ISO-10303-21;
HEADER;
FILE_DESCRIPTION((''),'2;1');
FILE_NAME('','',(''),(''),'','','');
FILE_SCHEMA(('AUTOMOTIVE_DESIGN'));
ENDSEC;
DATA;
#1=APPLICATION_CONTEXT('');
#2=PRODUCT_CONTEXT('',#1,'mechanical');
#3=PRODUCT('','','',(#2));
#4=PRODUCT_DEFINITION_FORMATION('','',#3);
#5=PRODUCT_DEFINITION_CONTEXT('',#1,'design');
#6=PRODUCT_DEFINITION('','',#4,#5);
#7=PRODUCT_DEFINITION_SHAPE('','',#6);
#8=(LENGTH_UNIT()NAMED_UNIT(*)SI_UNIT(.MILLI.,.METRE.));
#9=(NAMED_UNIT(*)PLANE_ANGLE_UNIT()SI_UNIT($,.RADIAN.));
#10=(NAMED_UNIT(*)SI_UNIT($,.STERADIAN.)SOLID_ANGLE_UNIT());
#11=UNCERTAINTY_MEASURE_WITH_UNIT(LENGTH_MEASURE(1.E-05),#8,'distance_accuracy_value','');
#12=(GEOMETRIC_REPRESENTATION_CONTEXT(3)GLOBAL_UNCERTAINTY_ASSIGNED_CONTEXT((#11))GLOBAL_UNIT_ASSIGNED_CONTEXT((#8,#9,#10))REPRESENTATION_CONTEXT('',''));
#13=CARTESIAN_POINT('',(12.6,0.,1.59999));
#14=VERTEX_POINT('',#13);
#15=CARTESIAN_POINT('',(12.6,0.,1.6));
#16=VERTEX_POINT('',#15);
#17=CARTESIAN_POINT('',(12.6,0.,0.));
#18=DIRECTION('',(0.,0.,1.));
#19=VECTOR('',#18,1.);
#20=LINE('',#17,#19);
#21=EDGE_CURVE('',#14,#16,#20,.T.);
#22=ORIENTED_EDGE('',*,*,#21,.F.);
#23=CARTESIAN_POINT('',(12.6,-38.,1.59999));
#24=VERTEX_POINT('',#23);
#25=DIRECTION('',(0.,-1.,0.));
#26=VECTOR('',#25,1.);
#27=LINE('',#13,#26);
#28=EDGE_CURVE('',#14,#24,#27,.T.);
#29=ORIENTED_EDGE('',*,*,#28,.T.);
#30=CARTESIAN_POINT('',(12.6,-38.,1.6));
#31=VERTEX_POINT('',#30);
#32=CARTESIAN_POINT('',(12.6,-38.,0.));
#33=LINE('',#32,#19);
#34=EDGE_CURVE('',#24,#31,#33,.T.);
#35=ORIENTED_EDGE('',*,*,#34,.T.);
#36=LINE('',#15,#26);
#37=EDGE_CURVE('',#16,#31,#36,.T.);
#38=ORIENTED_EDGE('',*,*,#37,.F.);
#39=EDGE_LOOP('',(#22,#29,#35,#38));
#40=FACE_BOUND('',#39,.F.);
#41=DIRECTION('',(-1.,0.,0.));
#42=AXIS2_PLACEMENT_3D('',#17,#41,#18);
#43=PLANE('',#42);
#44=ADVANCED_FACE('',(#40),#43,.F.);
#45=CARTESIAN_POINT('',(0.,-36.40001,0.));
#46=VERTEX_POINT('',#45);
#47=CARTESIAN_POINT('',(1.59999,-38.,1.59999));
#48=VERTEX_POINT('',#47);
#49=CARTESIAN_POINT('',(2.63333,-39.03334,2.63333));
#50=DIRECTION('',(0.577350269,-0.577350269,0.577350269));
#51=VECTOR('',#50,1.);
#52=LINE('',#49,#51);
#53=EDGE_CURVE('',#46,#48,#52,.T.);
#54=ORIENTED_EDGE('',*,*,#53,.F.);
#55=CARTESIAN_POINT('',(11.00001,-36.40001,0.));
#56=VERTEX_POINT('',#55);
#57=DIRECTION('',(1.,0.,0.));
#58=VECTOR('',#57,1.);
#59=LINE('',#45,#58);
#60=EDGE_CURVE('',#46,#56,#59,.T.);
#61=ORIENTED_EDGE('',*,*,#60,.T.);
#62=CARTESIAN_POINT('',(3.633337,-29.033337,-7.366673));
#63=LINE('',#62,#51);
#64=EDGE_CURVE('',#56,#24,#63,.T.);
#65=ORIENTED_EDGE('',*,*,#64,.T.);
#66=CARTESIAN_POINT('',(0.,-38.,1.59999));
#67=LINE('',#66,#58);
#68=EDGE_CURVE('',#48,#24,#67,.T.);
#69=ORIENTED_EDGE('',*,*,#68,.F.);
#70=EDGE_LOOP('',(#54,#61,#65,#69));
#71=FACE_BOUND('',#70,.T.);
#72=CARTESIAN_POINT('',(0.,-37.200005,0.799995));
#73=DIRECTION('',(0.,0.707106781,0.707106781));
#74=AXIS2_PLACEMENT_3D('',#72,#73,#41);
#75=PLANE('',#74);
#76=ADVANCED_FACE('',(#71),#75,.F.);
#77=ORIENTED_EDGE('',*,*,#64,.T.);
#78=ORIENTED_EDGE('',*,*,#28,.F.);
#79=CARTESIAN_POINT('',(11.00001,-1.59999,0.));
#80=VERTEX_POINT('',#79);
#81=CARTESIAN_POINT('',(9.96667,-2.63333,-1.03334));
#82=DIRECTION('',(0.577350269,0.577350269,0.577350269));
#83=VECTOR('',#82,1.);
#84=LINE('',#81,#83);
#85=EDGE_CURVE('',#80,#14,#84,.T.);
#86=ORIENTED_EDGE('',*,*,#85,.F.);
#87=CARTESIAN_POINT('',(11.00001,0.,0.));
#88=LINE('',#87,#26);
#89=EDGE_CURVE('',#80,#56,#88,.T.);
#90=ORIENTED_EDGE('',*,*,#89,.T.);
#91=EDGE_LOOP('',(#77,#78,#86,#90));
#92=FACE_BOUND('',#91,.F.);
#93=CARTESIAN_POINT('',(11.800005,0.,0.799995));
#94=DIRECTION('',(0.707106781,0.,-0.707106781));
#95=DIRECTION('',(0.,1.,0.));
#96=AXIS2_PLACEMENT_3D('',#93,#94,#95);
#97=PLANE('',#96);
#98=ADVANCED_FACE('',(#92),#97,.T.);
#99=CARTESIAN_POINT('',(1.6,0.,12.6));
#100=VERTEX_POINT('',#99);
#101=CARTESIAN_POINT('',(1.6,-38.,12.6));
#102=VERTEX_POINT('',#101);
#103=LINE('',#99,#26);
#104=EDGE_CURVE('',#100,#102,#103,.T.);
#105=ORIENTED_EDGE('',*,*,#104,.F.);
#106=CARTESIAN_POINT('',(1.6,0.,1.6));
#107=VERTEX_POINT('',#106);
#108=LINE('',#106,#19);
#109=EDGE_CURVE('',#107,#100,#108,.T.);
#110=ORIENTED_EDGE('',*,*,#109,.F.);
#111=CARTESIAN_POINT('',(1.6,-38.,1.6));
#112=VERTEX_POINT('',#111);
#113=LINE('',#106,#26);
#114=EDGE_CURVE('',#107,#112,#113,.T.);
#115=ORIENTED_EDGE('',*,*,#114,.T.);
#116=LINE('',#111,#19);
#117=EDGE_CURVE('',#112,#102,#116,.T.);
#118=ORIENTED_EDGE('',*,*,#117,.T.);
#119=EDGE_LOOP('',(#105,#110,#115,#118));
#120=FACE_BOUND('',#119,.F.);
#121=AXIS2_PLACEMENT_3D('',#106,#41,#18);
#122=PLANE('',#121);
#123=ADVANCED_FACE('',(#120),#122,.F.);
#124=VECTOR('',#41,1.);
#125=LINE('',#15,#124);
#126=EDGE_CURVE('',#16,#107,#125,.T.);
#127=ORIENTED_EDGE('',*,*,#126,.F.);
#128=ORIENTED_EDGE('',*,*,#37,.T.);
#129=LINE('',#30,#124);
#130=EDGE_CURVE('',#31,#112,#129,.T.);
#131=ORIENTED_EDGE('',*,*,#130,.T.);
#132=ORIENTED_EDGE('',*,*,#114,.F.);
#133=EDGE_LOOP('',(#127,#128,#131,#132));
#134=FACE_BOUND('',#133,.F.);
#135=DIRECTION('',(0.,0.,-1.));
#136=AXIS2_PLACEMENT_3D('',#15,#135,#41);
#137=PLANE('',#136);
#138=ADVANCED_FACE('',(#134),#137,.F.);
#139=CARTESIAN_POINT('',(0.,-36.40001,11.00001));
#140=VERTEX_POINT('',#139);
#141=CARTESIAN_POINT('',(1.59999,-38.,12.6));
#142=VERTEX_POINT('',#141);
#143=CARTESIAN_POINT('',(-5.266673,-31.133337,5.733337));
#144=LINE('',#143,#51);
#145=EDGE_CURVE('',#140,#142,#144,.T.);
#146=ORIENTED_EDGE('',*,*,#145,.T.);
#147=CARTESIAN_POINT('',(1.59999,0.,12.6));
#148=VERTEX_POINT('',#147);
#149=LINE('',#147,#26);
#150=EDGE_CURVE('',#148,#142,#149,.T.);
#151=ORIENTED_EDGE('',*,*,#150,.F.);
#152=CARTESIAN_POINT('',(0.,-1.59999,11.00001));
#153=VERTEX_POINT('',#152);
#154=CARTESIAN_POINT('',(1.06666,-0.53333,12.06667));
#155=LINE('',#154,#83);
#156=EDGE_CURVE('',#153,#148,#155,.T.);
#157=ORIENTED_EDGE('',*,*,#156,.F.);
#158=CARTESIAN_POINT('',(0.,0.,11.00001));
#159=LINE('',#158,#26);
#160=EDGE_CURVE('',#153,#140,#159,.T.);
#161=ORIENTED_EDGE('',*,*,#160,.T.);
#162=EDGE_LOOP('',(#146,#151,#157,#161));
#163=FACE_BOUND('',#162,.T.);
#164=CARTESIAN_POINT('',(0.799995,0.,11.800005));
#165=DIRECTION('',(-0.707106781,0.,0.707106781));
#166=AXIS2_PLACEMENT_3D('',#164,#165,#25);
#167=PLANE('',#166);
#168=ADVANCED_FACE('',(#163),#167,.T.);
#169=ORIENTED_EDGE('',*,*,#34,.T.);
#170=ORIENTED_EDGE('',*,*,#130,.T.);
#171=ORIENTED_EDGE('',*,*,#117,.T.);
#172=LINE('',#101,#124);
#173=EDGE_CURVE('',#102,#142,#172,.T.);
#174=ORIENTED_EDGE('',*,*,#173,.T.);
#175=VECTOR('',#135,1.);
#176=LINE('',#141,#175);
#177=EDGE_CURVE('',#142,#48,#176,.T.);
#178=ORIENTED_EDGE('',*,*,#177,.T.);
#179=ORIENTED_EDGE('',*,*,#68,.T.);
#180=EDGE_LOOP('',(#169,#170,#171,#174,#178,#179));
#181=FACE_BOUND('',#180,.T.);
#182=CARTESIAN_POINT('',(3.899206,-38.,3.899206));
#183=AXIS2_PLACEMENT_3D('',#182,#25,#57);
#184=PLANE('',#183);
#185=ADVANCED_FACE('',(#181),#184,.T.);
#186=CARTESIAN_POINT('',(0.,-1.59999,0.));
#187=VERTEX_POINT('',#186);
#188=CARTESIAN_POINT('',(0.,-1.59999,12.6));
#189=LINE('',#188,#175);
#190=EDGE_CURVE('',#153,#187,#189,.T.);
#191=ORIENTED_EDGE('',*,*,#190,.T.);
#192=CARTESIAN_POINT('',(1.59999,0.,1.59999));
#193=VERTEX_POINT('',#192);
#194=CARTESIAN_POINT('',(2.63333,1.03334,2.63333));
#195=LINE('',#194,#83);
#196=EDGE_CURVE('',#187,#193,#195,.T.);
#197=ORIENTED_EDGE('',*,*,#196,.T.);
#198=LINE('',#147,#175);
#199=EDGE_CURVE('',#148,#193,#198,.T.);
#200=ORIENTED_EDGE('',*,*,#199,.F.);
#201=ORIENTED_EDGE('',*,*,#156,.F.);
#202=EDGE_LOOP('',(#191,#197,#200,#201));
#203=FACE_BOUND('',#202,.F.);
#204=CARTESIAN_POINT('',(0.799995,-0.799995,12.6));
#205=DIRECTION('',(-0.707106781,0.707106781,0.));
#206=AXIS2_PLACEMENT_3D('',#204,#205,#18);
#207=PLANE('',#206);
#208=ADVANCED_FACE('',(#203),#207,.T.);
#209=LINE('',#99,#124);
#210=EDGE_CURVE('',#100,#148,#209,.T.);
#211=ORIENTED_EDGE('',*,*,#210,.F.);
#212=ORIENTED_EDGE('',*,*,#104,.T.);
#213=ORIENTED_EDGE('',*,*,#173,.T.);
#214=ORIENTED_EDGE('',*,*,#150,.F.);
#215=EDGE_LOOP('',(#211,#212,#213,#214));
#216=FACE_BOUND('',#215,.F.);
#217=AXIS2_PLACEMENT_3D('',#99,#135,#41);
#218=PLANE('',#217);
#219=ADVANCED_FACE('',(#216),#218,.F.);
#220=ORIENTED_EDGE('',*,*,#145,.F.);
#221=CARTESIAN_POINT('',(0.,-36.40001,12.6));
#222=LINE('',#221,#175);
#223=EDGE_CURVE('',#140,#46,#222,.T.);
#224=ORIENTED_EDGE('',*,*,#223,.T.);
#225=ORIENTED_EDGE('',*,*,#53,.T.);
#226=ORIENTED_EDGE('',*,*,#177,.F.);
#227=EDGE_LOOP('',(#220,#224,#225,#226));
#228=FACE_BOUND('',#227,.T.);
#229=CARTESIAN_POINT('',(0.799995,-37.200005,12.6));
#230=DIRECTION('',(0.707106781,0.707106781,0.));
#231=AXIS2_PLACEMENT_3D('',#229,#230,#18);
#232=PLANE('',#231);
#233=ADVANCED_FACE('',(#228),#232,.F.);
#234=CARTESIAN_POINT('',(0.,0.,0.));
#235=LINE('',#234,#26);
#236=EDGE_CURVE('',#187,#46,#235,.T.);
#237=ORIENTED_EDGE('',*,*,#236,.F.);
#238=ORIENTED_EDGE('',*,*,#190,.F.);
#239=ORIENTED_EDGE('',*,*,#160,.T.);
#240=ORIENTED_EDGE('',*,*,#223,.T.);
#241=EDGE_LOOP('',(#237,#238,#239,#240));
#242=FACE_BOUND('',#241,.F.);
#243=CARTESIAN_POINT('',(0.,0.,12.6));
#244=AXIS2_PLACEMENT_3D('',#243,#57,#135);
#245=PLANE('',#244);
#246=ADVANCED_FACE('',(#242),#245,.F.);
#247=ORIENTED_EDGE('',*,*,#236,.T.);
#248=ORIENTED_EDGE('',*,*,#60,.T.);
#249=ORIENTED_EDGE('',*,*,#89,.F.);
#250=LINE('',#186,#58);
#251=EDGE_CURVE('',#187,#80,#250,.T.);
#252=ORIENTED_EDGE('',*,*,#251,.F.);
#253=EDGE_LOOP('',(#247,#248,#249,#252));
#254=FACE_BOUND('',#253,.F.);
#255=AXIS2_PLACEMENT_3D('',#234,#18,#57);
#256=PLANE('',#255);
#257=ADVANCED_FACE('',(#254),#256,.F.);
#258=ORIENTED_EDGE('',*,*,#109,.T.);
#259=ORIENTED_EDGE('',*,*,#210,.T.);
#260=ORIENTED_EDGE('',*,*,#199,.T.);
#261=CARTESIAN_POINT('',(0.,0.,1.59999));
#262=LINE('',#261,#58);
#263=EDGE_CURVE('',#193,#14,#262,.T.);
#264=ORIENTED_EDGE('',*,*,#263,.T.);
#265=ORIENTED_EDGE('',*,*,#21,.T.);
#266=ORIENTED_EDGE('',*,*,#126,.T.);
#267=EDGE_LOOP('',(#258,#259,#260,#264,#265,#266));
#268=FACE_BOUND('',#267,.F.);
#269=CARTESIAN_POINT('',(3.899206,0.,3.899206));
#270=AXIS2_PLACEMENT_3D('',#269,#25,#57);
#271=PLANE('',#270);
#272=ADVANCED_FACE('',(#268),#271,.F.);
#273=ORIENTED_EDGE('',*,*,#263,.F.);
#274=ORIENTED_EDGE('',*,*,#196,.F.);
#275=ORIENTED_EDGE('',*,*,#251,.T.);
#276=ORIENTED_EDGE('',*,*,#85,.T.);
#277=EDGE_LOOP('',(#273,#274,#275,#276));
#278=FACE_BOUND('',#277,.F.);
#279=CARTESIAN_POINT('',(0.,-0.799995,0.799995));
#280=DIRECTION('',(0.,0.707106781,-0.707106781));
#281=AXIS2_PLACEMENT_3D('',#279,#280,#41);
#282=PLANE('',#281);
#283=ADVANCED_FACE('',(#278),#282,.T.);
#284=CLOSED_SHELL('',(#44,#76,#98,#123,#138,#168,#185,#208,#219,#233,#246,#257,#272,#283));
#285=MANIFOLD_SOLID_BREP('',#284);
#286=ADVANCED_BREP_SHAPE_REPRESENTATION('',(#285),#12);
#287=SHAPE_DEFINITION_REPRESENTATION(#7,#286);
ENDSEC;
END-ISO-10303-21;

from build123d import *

# Parameters (mm, degrees)
F1_DEPTH = 38
F2_SIZE  = 1.59999


# Not quite as in the source:
# - a fillet or chamfer is up to 0.001 mm smaller than in the source, because OpenCascade refuses the exact size


with BuildPart() as f1:
    # F0 (on Front) → F1 (new body)
    with BuildSketch(Plane.XZ):
        Polygon((0, 12.6), (0, 0), (12.6, 0), (12.6, 1.6), (1.6, 1.6), (1.6, 12.6), align=None)
    extrude(amount=F1_DEPTH)

    # F2 (size 1.6 in the source; OpenCascade refuses exactly that, so slightly less here)
    f2_edges = [f1.edges().sort_by_distance(p)[0] for p in [
        (12.6, -19, 0),
        (0, -19, 12.6),
        (0, 0, 6.3),
        (6.3, 0, 0),
        (0, -38, 6.3),
        (6.3, -38, 0),
    ]]
    chamfer(f2_edges, length=F2_SIZE)


solid = f1.part
